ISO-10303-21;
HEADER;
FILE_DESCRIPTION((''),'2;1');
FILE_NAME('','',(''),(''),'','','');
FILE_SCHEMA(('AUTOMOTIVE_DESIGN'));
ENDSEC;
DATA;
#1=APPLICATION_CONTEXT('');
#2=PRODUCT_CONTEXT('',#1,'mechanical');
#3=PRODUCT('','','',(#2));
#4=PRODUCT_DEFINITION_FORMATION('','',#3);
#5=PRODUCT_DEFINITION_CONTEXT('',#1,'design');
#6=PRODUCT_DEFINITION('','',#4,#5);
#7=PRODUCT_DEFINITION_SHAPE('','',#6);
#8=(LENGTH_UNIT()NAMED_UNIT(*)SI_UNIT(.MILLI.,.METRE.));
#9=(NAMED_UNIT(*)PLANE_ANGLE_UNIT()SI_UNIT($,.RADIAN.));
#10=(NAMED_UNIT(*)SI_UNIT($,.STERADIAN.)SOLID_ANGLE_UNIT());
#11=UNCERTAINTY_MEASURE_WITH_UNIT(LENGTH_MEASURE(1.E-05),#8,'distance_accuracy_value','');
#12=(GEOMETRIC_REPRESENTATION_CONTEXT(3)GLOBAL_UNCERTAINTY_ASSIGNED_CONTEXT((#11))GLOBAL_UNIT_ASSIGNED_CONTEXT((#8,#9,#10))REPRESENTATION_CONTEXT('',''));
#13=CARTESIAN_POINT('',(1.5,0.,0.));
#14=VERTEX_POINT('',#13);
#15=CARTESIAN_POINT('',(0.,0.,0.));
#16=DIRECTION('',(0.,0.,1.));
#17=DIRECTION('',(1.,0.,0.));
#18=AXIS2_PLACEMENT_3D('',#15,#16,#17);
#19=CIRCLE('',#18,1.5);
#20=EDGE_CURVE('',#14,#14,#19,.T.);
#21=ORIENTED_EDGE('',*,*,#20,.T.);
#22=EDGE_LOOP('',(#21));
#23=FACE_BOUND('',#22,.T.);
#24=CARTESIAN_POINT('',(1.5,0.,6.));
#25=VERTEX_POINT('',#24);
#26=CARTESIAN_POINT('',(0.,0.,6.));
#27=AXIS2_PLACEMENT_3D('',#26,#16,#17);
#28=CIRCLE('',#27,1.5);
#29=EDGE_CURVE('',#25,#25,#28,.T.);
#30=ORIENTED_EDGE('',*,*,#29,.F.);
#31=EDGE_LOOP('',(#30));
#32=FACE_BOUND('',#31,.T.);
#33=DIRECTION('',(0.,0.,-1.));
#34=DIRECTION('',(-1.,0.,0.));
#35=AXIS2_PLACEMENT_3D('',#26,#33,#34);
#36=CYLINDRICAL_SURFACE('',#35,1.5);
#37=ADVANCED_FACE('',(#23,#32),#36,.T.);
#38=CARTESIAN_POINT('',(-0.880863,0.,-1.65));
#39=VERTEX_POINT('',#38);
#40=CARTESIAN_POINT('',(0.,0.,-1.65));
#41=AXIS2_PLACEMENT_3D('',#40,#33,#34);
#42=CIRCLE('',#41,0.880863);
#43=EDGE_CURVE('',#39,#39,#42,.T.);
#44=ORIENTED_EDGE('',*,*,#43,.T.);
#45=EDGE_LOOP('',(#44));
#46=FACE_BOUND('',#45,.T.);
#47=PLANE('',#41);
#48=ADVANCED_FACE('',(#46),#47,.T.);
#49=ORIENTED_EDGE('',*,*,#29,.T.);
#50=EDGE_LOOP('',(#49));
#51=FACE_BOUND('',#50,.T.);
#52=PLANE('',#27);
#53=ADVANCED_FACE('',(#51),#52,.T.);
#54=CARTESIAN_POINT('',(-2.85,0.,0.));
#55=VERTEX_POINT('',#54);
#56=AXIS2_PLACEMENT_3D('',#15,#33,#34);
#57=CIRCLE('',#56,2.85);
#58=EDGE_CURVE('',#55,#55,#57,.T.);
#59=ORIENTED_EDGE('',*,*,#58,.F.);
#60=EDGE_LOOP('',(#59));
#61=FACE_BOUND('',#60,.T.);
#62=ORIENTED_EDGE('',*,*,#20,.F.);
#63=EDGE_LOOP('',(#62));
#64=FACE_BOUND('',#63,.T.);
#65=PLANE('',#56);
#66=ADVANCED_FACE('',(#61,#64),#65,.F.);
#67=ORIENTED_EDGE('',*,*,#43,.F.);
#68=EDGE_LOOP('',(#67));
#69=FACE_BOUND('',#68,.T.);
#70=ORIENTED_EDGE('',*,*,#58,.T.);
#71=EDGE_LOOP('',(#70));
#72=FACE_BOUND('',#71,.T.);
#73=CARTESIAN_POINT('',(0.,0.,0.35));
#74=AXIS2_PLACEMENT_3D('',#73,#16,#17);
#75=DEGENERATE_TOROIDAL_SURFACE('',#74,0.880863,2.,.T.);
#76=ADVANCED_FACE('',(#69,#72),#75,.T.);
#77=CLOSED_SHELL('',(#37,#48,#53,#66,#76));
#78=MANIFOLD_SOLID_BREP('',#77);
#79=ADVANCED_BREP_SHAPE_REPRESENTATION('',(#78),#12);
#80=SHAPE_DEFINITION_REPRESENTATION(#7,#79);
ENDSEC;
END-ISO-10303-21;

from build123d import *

# Parameters (mm, degrees)
SKETCH_1_R      = 1.5
EXTRUDE_1_DEPTH = 6
SKETCH_2_R      = 2.85
EXTRUDE_2_DEPTH = 1.65
FILLET_1_R      = 2


with BuildPart() as part:
    # 草图1 → 凸台-拉伸1 (new body)
    with BuildSketch(Plane.XY):
        Circle(SKETCH_1_R)
    extrude(amount=EXTRUDE_1_DEPTH)

    # 草图2 → 凸台-拉伸2 (add)
    with BuildSketch(Plane(origin=(0, 0, 0), x_dir=(-1, 0, 0), z_dir=(0, 0, -1))):
        Circle(SKETCH_2_R)
    extrude(amount=EXTRUDE_2_DEPTH)

    # 圆角1
    # the kernel refuses this fillet: 2 mm, written as the material it takes off along each edge
    with BuildSketch(Plane(origin=(0, 0, -1.65), x_dir=(-1, 0, 0), z_dir=(0, -1, 0))) as fillet_1_piece_1:
        with BuildLine():
            CenterArc((0.880863133, -2), FILLET_1_R, 10.078658108, 79.921341892)
            Line((0.880863133, 0), (0.880863133, 0.04))
            Line((0.880863133, 0.04), (2.85, 0.04))
            Line((2.85, 0.04), (2.89, 0))
            ThreePointArc((2.89, 0), (2.89, -0.825), (2.889382737, -1.643))
            Line((2.889382737, -1.643), (2.85, -1.65))
        make_face()
    revolve(axis=Axis((0, 0, -1.65), (0, 0, -1)), mode=Mode.SUBTRACT)


solid = part.part
